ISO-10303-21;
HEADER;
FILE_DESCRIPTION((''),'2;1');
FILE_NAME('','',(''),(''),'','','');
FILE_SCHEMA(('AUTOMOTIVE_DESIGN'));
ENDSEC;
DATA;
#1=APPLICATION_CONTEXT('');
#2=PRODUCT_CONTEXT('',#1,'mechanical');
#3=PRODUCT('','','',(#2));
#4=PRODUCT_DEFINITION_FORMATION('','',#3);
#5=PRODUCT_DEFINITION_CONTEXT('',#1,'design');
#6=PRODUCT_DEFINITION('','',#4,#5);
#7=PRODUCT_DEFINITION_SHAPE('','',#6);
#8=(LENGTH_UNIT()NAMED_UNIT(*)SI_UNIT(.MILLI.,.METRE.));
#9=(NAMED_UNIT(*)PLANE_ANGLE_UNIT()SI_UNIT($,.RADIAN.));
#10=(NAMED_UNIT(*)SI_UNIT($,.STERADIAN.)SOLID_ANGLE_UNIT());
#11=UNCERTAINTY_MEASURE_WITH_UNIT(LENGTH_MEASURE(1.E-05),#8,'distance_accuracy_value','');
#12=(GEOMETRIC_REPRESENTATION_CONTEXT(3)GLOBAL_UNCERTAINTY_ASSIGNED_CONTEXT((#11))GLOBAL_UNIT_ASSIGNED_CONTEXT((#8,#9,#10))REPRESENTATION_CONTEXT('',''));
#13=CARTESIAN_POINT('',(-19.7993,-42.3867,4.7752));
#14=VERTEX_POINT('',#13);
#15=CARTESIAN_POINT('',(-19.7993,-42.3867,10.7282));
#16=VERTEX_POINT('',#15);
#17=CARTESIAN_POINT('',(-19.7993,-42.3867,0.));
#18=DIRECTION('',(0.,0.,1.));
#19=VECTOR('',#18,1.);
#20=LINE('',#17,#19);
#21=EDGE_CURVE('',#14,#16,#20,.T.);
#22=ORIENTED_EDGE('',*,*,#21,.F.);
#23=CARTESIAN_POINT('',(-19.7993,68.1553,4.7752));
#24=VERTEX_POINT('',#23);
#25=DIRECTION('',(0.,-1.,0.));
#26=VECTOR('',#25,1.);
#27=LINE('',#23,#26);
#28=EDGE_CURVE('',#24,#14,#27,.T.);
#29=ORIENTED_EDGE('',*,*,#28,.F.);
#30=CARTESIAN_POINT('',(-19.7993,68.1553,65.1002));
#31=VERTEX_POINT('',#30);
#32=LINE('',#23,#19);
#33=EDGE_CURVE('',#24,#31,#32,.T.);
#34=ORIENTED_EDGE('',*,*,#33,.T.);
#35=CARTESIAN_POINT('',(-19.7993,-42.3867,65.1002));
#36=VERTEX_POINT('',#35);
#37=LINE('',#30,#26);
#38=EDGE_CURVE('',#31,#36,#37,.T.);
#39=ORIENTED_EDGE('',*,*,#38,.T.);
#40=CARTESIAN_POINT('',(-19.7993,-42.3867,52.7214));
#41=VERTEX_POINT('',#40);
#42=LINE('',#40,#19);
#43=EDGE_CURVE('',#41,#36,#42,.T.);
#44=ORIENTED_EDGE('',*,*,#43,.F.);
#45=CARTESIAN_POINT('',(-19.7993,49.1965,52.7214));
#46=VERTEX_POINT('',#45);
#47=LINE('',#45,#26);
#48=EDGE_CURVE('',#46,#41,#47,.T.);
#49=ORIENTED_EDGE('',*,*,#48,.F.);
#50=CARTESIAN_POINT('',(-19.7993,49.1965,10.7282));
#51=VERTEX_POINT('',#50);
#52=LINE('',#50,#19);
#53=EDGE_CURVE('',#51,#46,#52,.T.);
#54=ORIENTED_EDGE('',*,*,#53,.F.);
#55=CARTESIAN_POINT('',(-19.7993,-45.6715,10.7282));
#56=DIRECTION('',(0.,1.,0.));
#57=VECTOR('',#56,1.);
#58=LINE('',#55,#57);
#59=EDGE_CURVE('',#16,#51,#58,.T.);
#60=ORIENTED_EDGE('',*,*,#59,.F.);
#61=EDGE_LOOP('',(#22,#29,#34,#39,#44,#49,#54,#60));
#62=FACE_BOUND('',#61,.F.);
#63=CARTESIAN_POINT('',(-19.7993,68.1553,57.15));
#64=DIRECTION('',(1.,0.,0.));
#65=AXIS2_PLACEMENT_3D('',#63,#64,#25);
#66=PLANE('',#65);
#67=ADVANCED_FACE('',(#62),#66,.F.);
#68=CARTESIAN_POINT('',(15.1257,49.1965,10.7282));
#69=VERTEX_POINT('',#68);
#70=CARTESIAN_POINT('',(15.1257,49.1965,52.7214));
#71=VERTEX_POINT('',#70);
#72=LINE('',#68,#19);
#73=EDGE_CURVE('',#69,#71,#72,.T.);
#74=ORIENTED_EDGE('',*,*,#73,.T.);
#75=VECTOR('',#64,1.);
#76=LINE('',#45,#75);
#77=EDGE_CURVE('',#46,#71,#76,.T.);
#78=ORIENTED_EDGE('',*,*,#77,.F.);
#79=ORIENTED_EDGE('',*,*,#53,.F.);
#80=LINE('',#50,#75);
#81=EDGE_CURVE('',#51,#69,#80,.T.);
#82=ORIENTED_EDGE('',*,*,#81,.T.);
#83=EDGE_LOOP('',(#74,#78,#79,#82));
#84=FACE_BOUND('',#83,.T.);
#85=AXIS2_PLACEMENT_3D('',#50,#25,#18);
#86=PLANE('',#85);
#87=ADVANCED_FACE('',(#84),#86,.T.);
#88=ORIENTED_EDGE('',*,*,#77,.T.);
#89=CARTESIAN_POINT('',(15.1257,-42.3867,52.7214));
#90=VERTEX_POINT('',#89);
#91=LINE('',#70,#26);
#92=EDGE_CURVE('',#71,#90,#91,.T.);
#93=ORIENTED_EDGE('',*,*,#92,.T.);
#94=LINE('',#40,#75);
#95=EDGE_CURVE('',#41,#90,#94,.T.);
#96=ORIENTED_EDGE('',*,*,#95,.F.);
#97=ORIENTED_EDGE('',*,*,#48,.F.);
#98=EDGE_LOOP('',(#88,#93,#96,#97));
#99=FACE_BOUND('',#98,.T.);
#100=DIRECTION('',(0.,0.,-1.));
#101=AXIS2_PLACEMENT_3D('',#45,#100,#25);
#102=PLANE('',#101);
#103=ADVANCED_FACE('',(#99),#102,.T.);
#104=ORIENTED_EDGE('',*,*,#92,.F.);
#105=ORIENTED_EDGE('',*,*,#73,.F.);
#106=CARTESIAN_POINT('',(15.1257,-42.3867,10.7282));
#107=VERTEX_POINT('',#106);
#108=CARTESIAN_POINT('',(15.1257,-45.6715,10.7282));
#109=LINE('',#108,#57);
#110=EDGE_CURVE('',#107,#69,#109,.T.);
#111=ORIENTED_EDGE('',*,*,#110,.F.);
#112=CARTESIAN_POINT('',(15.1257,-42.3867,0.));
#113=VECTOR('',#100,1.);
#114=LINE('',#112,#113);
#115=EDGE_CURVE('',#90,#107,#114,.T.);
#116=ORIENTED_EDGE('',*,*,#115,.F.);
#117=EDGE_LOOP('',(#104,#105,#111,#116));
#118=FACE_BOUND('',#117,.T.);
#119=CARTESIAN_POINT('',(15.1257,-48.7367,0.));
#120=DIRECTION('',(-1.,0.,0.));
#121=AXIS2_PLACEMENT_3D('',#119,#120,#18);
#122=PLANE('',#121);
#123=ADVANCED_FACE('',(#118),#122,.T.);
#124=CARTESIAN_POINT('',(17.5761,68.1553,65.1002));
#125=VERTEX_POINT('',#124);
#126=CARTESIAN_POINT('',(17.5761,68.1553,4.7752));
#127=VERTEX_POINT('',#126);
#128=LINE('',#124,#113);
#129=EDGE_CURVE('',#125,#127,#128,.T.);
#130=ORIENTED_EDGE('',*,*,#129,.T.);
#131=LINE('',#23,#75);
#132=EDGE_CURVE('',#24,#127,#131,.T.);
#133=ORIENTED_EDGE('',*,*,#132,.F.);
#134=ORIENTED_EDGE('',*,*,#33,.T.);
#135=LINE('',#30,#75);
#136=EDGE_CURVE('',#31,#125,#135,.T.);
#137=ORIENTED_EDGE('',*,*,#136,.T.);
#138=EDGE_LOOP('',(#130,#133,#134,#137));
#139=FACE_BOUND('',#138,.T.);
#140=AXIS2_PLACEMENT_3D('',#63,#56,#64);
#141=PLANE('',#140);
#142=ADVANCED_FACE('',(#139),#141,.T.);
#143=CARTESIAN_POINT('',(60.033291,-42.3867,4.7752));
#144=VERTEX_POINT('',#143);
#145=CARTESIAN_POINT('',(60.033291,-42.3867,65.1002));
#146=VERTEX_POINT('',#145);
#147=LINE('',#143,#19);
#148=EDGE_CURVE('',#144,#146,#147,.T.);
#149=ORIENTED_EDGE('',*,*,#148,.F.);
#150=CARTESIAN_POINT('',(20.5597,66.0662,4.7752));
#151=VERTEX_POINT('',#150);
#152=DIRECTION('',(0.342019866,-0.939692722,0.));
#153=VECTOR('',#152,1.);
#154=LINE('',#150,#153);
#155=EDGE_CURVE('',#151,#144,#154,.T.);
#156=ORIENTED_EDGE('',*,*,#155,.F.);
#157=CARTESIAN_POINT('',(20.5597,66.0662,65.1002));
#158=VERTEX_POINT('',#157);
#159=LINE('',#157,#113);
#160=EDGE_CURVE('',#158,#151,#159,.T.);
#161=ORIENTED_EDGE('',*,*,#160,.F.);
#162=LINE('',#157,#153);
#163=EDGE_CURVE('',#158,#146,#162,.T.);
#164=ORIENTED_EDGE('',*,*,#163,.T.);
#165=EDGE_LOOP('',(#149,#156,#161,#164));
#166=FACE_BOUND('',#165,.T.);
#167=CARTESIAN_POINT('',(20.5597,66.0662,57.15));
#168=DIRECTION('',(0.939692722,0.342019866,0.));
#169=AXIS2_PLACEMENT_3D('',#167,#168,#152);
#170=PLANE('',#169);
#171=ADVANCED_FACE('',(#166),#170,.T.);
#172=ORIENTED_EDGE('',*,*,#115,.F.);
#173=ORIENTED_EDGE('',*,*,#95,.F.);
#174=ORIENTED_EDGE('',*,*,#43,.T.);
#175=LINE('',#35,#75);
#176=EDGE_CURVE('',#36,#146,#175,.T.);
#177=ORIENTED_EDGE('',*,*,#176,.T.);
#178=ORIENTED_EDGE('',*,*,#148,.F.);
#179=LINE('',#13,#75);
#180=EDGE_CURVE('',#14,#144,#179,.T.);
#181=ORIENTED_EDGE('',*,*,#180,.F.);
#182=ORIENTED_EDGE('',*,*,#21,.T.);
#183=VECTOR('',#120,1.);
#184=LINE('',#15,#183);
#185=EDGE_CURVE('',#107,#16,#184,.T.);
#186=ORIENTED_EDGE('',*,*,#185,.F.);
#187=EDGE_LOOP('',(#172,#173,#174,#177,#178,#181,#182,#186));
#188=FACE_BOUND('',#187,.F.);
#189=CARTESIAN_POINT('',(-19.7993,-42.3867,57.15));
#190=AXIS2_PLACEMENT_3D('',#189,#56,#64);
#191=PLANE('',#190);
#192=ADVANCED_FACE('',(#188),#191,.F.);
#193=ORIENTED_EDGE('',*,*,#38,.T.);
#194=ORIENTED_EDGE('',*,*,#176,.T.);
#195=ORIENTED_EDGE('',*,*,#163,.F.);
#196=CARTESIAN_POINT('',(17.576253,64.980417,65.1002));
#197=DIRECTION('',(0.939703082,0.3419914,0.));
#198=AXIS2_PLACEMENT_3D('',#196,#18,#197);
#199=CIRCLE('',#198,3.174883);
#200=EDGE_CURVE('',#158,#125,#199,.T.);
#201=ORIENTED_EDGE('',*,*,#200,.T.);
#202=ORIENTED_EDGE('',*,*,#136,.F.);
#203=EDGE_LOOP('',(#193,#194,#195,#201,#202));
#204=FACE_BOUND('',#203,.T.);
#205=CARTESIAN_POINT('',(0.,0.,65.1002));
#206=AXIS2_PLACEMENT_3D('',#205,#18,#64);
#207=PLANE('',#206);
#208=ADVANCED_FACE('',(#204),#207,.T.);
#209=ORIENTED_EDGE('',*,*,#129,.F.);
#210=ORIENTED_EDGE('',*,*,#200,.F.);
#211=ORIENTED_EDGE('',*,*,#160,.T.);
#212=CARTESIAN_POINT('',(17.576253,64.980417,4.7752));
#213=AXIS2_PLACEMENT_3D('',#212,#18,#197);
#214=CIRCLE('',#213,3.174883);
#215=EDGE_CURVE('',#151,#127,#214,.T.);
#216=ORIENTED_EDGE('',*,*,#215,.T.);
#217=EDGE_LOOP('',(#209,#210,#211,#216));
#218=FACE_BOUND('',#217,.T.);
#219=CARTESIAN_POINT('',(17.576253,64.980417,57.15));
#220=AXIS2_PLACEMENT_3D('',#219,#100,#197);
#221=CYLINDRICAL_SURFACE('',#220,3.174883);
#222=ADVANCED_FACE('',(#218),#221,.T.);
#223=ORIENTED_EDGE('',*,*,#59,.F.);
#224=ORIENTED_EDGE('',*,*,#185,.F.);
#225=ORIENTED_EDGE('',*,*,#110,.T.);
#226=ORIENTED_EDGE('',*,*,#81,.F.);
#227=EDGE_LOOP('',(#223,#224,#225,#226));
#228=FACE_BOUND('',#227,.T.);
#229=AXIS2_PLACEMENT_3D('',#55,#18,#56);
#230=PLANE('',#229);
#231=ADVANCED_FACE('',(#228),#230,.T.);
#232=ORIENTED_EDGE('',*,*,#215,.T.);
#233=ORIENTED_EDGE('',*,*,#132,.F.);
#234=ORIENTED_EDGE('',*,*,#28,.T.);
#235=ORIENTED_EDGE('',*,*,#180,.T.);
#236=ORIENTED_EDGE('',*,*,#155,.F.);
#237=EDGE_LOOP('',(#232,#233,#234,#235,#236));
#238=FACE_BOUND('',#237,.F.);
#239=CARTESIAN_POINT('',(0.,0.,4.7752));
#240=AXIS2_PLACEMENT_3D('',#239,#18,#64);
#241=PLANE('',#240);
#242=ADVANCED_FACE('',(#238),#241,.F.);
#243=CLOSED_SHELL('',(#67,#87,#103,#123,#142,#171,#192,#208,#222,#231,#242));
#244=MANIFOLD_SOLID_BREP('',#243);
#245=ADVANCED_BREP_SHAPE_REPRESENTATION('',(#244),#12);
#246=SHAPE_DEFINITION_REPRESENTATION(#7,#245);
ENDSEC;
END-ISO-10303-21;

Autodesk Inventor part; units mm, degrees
ref_plane "YZ Plane" through (0, 0, 0) normal (1, 0, 0) x (0, 1, 0)
ref_plane "XZ Plane" through (0, 0, 0) normal (0, 1, 0) x (-1, 0, 0)
ref_plane "XY Plane" through (0, 0, 0) normal (0, 0, 1) x (1, 0, 0)
sketch "Sketch1" plane through (0, 0, 0) normal (0, 0, 1) x (1, 0, 0)
  line L0 (-19.7993, 68.1553) -> (17.5761, 68.1553)
  line L1 (20.5597, 66.0662) -> (62.3445, -48.7367)
  line L2 (-19.7993, 68.1553) -> (-19.7993, -48.7367)
  line L3 (-19.7993, -48.7367) -> (62.3445, -48.7367)
  arc A0 (20.5597, 66.0662) -> (17.5761, 68.1553) centre (17.5761, 64.9803) ccw
  point P0 (0, 0)
  point P1 (19.7993, 68.1553)
  dimension "d0" = 110
  dimension "d1" = 39.5986
  dimension "d2" = 3.175
  dimension "d3" = 122.1707
extrude "Extrusion1" add sketch "Sketch1" along normal blind 63.5
sketch "Sketch2" plane through (-19.7993, -48.7367, 0) normal (-1, 0, 0) x (0, 0, 1)
  line L0 (10.7282, 97.9332) -> (52.7214, 97.9332)
  line L1 (52.7214, 97.9332) -> (52.7214, 3.0652)
  line L2 (52.7214, 3.0652) -> (10.7282, 3.0652)
  line L3 (10.7282, 3.0652) -> (10.7282, 97.9332)
  point P0 (0, 48.7367)
extrude "Extrusion2" cut sketch "Sketch2" against normal blind 34.925
move faces "Move1" translate (0, 0, -6.35) faces at (21.035, -10.4691, 63.5)
move faces "Move2" translate (0, 0, 4.7752) faces at (21.035, -10.4691, 0)
move faces "Move3" translate (0, 6.35, 0) faces at (7.582, -48.7367, 22.2335)
move faces "Move4" translate (0, 0, 7.9502) faces at (20.2646, -6.2358, 57.15)
